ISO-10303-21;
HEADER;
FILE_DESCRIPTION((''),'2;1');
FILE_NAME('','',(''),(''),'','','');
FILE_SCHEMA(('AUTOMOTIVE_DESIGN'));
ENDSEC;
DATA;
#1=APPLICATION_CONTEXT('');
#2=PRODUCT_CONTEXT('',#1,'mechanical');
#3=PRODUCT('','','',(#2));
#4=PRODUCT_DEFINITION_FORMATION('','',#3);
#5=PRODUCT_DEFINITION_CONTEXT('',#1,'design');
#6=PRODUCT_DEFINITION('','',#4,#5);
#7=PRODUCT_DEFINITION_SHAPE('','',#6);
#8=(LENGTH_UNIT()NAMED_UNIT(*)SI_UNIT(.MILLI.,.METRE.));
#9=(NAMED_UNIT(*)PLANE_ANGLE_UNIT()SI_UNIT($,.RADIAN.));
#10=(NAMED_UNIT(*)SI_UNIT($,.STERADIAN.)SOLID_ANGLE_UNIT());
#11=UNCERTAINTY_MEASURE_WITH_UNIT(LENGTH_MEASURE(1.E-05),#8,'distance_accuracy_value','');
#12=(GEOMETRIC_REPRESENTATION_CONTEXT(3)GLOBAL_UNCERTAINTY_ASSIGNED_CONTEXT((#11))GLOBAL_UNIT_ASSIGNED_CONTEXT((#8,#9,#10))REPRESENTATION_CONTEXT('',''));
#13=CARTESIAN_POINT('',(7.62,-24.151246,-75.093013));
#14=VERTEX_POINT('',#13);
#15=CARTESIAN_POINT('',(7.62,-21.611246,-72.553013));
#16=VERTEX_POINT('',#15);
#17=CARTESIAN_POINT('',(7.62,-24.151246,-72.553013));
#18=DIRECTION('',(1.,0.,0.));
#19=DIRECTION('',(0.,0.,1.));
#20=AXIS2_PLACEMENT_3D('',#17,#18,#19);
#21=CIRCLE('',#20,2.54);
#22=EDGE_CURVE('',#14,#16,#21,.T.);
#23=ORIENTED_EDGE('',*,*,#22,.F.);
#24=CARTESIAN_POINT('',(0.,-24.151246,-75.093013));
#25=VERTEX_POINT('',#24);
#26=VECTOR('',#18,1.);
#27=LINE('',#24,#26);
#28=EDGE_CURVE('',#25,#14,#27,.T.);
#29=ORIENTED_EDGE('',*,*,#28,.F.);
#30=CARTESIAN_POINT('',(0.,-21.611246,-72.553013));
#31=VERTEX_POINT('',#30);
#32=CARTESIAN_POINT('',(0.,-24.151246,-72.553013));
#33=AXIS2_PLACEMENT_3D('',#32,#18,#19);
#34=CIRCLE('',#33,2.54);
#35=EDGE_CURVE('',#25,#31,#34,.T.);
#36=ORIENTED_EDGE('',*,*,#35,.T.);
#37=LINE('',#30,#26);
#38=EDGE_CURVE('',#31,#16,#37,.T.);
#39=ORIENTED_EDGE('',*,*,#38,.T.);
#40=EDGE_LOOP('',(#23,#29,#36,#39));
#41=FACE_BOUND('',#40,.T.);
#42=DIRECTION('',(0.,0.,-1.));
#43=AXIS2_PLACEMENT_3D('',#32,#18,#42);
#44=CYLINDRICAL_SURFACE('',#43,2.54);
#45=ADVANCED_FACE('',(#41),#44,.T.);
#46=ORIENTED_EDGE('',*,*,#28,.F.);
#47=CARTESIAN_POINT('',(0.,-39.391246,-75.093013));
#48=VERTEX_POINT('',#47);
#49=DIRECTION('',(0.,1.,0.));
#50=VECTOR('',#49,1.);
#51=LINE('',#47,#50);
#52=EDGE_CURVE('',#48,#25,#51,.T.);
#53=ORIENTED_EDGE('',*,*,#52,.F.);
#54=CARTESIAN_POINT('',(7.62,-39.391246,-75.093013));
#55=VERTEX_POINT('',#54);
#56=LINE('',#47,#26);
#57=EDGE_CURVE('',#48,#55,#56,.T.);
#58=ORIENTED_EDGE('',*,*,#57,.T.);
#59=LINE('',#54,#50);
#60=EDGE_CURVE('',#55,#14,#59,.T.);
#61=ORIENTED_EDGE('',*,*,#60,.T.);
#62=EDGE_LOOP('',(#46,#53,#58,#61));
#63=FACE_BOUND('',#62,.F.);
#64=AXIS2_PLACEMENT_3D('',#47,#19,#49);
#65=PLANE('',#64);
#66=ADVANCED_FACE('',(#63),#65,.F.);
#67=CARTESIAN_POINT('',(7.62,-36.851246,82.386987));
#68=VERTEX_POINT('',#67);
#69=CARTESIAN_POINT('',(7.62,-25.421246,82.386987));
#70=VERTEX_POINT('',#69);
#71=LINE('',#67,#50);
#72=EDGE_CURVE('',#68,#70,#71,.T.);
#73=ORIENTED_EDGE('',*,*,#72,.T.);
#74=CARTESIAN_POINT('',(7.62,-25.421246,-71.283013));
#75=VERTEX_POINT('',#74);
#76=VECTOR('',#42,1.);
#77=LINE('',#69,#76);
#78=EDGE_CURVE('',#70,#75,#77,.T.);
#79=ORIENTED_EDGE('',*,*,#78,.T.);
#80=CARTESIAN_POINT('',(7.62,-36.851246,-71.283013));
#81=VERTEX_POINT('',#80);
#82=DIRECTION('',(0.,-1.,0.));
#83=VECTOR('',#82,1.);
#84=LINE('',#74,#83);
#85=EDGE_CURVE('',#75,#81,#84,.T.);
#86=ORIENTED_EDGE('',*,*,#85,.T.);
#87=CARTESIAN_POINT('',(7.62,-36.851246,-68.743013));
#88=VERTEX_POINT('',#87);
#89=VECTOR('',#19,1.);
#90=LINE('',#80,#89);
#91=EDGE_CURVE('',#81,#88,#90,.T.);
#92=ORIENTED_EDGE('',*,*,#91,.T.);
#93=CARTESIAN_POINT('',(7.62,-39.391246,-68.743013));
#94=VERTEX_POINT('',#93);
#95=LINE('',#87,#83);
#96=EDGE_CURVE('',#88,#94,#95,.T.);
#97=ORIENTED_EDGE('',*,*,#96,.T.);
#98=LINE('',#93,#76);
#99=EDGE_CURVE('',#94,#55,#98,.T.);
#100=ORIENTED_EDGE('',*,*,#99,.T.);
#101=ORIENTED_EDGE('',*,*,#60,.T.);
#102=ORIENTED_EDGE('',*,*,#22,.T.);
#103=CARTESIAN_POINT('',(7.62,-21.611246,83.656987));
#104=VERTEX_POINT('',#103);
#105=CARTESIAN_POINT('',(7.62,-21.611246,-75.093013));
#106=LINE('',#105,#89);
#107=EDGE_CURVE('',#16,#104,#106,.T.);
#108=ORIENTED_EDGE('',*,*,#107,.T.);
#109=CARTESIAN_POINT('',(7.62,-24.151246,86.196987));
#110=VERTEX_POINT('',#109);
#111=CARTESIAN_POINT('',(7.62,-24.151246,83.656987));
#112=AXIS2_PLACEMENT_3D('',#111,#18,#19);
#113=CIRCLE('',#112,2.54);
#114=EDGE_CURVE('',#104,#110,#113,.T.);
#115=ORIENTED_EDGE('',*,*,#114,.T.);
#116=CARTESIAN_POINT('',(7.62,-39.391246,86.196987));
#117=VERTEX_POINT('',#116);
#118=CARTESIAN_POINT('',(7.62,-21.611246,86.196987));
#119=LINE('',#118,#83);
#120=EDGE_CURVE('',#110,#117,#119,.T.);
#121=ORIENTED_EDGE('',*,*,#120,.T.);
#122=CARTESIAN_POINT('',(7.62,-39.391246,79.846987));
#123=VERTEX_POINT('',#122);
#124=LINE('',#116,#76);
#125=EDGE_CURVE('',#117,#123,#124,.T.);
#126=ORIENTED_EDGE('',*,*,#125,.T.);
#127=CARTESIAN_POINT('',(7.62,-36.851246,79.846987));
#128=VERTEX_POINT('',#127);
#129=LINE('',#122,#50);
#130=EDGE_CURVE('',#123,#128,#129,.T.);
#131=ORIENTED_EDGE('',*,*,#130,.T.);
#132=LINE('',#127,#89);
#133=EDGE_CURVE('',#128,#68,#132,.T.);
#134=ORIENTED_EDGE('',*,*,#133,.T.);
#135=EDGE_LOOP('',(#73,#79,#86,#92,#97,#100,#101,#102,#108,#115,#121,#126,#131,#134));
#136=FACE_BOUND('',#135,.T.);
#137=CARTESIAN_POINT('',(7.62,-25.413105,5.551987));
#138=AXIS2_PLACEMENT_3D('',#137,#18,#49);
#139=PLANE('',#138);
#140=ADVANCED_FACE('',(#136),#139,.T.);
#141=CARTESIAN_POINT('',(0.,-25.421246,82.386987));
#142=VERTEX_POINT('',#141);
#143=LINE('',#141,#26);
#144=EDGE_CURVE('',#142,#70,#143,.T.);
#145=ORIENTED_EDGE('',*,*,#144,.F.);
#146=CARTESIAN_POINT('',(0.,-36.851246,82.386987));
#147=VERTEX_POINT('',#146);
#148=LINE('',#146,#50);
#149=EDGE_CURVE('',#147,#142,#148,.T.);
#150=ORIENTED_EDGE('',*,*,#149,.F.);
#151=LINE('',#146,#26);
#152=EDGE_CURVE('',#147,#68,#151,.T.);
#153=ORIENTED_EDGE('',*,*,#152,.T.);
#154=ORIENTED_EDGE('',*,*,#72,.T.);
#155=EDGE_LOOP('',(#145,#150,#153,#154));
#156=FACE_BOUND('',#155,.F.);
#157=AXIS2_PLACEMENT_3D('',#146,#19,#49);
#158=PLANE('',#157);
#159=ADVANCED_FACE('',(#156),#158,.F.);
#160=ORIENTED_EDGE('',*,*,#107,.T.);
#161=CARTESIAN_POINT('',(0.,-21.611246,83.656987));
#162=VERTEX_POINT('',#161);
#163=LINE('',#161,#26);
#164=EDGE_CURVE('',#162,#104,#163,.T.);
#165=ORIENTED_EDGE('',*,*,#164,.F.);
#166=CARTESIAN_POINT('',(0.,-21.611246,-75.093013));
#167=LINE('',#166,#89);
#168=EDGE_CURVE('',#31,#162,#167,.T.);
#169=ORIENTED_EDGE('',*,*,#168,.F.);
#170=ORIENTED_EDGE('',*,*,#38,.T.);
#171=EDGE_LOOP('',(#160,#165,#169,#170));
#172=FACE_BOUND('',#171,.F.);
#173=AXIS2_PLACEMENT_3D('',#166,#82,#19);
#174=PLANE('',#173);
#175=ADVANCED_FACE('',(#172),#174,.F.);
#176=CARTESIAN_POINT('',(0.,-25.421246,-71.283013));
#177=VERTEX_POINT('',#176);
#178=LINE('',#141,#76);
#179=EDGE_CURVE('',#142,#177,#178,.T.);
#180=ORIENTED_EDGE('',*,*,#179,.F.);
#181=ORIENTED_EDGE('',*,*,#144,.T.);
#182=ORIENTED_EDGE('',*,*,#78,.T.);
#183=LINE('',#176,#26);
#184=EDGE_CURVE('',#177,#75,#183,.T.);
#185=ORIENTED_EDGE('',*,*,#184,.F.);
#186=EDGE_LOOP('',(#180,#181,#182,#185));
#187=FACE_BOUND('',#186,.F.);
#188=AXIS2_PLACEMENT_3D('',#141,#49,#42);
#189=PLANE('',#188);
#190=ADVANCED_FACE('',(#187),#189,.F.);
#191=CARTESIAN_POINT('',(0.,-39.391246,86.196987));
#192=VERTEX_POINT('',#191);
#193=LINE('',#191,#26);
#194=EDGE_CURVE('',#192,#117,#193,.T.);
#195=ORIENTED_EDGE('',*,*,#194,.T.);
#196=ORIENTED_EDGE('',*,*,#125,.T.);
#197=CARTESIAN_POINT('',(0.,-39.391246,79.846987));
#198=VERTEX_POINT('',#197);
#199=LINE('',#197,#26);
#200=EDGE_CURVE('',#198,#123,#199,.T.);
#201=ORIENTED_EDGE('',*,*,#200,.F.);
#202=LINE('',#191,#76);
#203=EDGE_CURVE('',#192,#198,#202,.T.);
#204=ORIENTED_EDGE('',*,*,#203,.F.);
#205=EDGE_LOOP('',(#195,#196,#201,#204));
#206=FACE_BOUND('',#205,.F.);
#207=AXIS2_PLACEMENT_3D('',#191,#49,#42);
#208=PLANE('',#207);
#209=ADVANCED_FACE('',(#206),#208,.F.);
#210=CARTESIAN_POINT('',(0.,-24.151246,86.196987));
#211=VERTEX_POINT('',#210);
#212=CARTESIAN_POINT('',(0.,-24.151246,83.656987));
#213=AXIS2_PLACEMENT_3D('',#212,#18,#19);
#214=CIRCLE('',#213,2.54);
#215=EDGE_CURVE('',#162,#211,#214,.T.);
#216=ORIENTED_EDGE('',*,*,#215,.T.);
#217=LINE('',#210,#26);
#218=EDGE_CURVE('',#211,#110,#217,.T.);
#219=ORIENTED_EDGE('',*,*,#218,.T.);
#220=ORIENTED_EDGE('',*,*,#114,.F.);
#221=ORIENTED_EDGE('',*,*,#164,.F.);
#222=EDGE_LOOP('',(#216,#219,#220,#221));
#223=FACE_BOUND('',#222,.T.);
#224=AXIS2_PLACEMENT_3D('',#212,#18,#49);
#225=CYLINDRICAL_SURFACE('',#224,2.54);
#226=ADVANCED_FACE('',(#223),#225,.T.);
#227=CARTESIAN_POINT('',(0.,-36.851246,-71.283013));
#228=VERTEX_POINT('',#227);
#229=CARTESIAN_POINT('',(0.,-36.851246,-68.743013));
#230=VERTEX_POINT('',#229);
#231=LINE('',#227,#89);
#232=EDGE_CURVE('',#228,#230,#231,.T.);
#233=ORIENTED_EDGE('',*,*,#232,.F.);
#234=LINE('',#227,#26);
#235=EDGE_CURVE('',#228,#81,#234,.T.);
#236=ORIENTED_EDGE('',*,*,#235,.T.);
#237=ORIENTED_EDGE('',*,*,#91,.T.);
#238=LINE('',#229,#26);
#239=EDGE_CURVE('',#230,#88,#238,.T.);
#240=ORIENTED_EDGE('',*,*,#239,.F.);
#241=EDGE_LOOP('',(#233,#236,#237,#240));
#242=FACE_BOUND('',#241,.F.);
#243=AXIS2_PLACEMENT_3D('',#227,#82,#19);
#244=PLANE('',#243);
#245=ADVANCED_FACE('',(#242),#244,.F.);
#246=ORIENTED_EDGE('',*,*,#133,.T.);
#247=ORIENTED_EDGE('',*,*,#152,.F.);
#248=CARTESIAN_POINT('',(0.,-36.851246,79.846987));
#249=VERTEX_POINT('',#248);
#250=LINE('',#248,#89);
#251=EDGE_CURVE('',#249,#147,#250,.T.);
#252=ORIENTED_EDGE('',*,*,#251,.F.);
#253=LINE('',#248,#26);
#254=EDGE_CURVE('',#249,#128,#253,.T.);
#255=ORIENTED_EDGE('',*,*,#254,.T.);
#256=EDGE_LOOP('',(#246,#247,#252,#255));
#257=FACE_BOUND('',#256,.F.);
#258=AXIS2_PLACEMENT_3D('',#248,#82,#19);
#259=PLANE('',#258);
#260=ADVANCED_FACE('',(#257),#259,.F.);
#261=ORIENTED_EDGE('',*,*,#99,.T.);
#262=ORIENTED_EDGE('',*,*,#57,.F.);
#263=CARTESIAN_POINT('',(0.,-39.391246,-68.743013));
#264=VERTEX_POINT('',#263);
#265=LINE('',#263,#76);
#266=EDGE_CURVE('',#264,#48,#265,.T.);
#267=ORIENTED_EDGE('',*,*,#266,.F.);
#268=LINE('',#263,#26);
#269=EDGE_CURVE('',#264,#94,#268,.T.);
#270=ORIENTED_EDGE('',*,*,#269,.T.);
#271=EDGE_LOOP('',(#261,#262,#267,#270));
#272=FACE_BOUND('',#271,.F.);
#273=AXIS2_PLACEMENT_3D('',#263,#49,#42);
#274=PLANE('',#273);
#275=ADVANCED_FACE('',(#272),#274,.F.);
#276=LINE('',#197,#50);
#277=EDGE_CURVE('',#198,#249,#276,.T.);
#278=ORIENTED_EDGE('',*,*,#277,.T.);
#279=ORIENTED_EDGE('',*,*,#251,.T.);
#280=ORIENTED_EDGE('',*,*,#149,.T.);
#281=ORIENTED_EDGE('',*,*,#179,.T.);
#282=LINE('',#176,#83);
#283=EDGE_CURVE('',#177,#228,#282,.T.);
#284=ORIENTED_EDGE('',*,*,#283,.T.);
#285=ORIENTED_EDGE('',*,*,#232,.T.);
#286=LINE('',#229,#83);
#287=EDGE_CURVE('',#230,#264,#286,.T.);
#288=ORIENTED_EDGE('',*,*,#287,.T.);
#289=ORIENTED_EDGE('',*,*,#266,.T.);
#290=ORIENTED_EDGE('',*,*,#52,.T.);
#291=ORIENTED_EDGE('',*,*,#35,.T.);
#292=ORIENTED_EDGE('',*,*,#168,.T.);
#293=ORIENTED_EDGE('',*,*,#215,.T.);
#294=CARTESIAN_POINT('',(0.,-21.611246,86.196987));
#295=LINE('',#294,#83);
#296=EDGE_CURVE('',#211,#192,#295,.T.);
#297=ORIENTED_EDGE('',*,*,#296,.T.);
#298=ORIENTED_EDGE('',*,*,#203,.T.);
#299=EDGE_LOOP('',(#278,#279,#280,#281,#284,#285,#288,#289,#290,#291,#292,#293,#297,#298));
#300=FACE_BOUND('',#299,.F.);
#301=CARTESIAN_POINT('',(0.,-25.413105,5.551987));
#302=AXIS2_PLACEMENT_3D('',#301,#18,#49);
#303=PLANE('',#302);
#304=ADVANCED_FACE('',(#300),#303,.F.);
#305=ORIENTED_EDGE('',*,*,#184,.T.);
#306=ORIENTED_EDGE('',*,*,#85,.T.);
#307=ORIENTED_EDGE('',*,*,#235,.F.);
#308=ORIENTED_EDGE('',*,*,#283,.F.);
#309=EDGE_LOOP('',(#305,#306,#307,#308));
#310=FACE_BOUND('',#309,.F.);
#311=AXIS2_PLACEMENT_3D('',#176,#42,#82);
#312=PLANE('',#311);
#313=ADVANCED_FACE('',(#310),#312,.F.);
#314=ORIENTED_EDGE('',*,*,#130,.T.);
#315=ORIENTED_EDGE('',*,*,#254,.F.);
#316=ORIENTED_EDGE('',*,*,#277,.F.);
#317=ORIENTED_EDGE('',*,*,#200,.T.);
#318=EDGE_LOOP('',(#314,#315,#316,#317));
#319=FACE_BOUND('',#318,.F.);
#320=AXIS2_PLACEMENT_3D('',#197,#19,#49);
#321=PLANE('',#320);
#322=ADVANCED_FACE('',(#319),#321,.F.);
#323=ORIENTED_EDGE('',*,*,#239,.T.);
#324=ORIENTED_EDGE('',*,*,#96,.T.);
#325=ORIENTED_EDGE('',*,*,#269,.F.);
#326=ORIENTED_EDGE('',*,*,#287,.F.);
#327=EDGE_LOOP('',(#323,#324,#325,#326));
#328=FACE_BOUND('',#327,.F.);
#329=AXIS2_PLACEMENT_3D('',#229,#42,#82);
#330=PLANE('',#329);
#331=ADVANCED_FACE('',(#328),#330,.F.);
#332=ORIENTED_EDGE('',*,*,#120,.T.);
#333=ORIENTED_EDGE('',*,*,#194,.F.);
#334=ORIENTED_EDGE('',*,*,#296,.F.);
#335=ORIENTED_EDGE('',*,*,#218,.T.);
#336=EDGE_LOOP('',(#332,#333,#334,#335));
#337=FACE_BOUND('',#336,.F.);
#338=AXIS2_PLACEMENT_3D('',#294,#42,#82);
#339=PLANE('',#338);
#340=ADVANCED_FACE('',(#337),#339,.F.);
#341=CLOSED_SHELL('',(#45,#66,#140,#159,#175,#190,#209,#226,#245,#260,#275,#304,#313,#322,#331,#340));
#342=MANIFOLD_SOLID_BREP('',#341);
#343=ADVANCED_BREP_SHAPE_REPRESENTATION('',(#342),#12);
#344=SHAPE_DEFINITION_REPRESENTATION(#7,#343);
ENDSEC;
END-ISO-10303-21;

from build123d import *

# Parameters (mm, degrees)
F1_DEPTH = 7.62
F2_R     = 2.54


# Not quite as in the source:
# - a feature names something its author has since deleted; it is built from what else it names


with BuildPart() as f1:
    # F0 (on Right) → F1 (new body)
    with BuildSketch(Plane.YZ):
        Polygon((-39.391245693, -75.0930126251), (-21.611245693, -75.0930126251), (-21.611245693, 86.1969873749), (-36.851245693, 86.1969873749), (-39.391245693, 86.1969873749), (-39.391245693, 79.8469873749), (-36.851245693, 79.8469873749), (-36.851245693, 82.3869873749), (-25.421245693, 82.3869873749), (-25.421245693, -71.2830126251), (-36.851245693, -71.2830126251), (-36.851245693, -68.7430126251), (-39.391245693, -68.7430126251), align=None)
    extrude(amount=F1_DEPTH)

    # F2
    f2_edges = [f1.edges().sort_by_distance(p)[0] for p in [
        (3.81, -21.611246, -75.093013),
        (3.81, -21.611246, 86.196987),
    ]]
    fillet(f2_edges, radius=F2_R)


solid = f1.part
